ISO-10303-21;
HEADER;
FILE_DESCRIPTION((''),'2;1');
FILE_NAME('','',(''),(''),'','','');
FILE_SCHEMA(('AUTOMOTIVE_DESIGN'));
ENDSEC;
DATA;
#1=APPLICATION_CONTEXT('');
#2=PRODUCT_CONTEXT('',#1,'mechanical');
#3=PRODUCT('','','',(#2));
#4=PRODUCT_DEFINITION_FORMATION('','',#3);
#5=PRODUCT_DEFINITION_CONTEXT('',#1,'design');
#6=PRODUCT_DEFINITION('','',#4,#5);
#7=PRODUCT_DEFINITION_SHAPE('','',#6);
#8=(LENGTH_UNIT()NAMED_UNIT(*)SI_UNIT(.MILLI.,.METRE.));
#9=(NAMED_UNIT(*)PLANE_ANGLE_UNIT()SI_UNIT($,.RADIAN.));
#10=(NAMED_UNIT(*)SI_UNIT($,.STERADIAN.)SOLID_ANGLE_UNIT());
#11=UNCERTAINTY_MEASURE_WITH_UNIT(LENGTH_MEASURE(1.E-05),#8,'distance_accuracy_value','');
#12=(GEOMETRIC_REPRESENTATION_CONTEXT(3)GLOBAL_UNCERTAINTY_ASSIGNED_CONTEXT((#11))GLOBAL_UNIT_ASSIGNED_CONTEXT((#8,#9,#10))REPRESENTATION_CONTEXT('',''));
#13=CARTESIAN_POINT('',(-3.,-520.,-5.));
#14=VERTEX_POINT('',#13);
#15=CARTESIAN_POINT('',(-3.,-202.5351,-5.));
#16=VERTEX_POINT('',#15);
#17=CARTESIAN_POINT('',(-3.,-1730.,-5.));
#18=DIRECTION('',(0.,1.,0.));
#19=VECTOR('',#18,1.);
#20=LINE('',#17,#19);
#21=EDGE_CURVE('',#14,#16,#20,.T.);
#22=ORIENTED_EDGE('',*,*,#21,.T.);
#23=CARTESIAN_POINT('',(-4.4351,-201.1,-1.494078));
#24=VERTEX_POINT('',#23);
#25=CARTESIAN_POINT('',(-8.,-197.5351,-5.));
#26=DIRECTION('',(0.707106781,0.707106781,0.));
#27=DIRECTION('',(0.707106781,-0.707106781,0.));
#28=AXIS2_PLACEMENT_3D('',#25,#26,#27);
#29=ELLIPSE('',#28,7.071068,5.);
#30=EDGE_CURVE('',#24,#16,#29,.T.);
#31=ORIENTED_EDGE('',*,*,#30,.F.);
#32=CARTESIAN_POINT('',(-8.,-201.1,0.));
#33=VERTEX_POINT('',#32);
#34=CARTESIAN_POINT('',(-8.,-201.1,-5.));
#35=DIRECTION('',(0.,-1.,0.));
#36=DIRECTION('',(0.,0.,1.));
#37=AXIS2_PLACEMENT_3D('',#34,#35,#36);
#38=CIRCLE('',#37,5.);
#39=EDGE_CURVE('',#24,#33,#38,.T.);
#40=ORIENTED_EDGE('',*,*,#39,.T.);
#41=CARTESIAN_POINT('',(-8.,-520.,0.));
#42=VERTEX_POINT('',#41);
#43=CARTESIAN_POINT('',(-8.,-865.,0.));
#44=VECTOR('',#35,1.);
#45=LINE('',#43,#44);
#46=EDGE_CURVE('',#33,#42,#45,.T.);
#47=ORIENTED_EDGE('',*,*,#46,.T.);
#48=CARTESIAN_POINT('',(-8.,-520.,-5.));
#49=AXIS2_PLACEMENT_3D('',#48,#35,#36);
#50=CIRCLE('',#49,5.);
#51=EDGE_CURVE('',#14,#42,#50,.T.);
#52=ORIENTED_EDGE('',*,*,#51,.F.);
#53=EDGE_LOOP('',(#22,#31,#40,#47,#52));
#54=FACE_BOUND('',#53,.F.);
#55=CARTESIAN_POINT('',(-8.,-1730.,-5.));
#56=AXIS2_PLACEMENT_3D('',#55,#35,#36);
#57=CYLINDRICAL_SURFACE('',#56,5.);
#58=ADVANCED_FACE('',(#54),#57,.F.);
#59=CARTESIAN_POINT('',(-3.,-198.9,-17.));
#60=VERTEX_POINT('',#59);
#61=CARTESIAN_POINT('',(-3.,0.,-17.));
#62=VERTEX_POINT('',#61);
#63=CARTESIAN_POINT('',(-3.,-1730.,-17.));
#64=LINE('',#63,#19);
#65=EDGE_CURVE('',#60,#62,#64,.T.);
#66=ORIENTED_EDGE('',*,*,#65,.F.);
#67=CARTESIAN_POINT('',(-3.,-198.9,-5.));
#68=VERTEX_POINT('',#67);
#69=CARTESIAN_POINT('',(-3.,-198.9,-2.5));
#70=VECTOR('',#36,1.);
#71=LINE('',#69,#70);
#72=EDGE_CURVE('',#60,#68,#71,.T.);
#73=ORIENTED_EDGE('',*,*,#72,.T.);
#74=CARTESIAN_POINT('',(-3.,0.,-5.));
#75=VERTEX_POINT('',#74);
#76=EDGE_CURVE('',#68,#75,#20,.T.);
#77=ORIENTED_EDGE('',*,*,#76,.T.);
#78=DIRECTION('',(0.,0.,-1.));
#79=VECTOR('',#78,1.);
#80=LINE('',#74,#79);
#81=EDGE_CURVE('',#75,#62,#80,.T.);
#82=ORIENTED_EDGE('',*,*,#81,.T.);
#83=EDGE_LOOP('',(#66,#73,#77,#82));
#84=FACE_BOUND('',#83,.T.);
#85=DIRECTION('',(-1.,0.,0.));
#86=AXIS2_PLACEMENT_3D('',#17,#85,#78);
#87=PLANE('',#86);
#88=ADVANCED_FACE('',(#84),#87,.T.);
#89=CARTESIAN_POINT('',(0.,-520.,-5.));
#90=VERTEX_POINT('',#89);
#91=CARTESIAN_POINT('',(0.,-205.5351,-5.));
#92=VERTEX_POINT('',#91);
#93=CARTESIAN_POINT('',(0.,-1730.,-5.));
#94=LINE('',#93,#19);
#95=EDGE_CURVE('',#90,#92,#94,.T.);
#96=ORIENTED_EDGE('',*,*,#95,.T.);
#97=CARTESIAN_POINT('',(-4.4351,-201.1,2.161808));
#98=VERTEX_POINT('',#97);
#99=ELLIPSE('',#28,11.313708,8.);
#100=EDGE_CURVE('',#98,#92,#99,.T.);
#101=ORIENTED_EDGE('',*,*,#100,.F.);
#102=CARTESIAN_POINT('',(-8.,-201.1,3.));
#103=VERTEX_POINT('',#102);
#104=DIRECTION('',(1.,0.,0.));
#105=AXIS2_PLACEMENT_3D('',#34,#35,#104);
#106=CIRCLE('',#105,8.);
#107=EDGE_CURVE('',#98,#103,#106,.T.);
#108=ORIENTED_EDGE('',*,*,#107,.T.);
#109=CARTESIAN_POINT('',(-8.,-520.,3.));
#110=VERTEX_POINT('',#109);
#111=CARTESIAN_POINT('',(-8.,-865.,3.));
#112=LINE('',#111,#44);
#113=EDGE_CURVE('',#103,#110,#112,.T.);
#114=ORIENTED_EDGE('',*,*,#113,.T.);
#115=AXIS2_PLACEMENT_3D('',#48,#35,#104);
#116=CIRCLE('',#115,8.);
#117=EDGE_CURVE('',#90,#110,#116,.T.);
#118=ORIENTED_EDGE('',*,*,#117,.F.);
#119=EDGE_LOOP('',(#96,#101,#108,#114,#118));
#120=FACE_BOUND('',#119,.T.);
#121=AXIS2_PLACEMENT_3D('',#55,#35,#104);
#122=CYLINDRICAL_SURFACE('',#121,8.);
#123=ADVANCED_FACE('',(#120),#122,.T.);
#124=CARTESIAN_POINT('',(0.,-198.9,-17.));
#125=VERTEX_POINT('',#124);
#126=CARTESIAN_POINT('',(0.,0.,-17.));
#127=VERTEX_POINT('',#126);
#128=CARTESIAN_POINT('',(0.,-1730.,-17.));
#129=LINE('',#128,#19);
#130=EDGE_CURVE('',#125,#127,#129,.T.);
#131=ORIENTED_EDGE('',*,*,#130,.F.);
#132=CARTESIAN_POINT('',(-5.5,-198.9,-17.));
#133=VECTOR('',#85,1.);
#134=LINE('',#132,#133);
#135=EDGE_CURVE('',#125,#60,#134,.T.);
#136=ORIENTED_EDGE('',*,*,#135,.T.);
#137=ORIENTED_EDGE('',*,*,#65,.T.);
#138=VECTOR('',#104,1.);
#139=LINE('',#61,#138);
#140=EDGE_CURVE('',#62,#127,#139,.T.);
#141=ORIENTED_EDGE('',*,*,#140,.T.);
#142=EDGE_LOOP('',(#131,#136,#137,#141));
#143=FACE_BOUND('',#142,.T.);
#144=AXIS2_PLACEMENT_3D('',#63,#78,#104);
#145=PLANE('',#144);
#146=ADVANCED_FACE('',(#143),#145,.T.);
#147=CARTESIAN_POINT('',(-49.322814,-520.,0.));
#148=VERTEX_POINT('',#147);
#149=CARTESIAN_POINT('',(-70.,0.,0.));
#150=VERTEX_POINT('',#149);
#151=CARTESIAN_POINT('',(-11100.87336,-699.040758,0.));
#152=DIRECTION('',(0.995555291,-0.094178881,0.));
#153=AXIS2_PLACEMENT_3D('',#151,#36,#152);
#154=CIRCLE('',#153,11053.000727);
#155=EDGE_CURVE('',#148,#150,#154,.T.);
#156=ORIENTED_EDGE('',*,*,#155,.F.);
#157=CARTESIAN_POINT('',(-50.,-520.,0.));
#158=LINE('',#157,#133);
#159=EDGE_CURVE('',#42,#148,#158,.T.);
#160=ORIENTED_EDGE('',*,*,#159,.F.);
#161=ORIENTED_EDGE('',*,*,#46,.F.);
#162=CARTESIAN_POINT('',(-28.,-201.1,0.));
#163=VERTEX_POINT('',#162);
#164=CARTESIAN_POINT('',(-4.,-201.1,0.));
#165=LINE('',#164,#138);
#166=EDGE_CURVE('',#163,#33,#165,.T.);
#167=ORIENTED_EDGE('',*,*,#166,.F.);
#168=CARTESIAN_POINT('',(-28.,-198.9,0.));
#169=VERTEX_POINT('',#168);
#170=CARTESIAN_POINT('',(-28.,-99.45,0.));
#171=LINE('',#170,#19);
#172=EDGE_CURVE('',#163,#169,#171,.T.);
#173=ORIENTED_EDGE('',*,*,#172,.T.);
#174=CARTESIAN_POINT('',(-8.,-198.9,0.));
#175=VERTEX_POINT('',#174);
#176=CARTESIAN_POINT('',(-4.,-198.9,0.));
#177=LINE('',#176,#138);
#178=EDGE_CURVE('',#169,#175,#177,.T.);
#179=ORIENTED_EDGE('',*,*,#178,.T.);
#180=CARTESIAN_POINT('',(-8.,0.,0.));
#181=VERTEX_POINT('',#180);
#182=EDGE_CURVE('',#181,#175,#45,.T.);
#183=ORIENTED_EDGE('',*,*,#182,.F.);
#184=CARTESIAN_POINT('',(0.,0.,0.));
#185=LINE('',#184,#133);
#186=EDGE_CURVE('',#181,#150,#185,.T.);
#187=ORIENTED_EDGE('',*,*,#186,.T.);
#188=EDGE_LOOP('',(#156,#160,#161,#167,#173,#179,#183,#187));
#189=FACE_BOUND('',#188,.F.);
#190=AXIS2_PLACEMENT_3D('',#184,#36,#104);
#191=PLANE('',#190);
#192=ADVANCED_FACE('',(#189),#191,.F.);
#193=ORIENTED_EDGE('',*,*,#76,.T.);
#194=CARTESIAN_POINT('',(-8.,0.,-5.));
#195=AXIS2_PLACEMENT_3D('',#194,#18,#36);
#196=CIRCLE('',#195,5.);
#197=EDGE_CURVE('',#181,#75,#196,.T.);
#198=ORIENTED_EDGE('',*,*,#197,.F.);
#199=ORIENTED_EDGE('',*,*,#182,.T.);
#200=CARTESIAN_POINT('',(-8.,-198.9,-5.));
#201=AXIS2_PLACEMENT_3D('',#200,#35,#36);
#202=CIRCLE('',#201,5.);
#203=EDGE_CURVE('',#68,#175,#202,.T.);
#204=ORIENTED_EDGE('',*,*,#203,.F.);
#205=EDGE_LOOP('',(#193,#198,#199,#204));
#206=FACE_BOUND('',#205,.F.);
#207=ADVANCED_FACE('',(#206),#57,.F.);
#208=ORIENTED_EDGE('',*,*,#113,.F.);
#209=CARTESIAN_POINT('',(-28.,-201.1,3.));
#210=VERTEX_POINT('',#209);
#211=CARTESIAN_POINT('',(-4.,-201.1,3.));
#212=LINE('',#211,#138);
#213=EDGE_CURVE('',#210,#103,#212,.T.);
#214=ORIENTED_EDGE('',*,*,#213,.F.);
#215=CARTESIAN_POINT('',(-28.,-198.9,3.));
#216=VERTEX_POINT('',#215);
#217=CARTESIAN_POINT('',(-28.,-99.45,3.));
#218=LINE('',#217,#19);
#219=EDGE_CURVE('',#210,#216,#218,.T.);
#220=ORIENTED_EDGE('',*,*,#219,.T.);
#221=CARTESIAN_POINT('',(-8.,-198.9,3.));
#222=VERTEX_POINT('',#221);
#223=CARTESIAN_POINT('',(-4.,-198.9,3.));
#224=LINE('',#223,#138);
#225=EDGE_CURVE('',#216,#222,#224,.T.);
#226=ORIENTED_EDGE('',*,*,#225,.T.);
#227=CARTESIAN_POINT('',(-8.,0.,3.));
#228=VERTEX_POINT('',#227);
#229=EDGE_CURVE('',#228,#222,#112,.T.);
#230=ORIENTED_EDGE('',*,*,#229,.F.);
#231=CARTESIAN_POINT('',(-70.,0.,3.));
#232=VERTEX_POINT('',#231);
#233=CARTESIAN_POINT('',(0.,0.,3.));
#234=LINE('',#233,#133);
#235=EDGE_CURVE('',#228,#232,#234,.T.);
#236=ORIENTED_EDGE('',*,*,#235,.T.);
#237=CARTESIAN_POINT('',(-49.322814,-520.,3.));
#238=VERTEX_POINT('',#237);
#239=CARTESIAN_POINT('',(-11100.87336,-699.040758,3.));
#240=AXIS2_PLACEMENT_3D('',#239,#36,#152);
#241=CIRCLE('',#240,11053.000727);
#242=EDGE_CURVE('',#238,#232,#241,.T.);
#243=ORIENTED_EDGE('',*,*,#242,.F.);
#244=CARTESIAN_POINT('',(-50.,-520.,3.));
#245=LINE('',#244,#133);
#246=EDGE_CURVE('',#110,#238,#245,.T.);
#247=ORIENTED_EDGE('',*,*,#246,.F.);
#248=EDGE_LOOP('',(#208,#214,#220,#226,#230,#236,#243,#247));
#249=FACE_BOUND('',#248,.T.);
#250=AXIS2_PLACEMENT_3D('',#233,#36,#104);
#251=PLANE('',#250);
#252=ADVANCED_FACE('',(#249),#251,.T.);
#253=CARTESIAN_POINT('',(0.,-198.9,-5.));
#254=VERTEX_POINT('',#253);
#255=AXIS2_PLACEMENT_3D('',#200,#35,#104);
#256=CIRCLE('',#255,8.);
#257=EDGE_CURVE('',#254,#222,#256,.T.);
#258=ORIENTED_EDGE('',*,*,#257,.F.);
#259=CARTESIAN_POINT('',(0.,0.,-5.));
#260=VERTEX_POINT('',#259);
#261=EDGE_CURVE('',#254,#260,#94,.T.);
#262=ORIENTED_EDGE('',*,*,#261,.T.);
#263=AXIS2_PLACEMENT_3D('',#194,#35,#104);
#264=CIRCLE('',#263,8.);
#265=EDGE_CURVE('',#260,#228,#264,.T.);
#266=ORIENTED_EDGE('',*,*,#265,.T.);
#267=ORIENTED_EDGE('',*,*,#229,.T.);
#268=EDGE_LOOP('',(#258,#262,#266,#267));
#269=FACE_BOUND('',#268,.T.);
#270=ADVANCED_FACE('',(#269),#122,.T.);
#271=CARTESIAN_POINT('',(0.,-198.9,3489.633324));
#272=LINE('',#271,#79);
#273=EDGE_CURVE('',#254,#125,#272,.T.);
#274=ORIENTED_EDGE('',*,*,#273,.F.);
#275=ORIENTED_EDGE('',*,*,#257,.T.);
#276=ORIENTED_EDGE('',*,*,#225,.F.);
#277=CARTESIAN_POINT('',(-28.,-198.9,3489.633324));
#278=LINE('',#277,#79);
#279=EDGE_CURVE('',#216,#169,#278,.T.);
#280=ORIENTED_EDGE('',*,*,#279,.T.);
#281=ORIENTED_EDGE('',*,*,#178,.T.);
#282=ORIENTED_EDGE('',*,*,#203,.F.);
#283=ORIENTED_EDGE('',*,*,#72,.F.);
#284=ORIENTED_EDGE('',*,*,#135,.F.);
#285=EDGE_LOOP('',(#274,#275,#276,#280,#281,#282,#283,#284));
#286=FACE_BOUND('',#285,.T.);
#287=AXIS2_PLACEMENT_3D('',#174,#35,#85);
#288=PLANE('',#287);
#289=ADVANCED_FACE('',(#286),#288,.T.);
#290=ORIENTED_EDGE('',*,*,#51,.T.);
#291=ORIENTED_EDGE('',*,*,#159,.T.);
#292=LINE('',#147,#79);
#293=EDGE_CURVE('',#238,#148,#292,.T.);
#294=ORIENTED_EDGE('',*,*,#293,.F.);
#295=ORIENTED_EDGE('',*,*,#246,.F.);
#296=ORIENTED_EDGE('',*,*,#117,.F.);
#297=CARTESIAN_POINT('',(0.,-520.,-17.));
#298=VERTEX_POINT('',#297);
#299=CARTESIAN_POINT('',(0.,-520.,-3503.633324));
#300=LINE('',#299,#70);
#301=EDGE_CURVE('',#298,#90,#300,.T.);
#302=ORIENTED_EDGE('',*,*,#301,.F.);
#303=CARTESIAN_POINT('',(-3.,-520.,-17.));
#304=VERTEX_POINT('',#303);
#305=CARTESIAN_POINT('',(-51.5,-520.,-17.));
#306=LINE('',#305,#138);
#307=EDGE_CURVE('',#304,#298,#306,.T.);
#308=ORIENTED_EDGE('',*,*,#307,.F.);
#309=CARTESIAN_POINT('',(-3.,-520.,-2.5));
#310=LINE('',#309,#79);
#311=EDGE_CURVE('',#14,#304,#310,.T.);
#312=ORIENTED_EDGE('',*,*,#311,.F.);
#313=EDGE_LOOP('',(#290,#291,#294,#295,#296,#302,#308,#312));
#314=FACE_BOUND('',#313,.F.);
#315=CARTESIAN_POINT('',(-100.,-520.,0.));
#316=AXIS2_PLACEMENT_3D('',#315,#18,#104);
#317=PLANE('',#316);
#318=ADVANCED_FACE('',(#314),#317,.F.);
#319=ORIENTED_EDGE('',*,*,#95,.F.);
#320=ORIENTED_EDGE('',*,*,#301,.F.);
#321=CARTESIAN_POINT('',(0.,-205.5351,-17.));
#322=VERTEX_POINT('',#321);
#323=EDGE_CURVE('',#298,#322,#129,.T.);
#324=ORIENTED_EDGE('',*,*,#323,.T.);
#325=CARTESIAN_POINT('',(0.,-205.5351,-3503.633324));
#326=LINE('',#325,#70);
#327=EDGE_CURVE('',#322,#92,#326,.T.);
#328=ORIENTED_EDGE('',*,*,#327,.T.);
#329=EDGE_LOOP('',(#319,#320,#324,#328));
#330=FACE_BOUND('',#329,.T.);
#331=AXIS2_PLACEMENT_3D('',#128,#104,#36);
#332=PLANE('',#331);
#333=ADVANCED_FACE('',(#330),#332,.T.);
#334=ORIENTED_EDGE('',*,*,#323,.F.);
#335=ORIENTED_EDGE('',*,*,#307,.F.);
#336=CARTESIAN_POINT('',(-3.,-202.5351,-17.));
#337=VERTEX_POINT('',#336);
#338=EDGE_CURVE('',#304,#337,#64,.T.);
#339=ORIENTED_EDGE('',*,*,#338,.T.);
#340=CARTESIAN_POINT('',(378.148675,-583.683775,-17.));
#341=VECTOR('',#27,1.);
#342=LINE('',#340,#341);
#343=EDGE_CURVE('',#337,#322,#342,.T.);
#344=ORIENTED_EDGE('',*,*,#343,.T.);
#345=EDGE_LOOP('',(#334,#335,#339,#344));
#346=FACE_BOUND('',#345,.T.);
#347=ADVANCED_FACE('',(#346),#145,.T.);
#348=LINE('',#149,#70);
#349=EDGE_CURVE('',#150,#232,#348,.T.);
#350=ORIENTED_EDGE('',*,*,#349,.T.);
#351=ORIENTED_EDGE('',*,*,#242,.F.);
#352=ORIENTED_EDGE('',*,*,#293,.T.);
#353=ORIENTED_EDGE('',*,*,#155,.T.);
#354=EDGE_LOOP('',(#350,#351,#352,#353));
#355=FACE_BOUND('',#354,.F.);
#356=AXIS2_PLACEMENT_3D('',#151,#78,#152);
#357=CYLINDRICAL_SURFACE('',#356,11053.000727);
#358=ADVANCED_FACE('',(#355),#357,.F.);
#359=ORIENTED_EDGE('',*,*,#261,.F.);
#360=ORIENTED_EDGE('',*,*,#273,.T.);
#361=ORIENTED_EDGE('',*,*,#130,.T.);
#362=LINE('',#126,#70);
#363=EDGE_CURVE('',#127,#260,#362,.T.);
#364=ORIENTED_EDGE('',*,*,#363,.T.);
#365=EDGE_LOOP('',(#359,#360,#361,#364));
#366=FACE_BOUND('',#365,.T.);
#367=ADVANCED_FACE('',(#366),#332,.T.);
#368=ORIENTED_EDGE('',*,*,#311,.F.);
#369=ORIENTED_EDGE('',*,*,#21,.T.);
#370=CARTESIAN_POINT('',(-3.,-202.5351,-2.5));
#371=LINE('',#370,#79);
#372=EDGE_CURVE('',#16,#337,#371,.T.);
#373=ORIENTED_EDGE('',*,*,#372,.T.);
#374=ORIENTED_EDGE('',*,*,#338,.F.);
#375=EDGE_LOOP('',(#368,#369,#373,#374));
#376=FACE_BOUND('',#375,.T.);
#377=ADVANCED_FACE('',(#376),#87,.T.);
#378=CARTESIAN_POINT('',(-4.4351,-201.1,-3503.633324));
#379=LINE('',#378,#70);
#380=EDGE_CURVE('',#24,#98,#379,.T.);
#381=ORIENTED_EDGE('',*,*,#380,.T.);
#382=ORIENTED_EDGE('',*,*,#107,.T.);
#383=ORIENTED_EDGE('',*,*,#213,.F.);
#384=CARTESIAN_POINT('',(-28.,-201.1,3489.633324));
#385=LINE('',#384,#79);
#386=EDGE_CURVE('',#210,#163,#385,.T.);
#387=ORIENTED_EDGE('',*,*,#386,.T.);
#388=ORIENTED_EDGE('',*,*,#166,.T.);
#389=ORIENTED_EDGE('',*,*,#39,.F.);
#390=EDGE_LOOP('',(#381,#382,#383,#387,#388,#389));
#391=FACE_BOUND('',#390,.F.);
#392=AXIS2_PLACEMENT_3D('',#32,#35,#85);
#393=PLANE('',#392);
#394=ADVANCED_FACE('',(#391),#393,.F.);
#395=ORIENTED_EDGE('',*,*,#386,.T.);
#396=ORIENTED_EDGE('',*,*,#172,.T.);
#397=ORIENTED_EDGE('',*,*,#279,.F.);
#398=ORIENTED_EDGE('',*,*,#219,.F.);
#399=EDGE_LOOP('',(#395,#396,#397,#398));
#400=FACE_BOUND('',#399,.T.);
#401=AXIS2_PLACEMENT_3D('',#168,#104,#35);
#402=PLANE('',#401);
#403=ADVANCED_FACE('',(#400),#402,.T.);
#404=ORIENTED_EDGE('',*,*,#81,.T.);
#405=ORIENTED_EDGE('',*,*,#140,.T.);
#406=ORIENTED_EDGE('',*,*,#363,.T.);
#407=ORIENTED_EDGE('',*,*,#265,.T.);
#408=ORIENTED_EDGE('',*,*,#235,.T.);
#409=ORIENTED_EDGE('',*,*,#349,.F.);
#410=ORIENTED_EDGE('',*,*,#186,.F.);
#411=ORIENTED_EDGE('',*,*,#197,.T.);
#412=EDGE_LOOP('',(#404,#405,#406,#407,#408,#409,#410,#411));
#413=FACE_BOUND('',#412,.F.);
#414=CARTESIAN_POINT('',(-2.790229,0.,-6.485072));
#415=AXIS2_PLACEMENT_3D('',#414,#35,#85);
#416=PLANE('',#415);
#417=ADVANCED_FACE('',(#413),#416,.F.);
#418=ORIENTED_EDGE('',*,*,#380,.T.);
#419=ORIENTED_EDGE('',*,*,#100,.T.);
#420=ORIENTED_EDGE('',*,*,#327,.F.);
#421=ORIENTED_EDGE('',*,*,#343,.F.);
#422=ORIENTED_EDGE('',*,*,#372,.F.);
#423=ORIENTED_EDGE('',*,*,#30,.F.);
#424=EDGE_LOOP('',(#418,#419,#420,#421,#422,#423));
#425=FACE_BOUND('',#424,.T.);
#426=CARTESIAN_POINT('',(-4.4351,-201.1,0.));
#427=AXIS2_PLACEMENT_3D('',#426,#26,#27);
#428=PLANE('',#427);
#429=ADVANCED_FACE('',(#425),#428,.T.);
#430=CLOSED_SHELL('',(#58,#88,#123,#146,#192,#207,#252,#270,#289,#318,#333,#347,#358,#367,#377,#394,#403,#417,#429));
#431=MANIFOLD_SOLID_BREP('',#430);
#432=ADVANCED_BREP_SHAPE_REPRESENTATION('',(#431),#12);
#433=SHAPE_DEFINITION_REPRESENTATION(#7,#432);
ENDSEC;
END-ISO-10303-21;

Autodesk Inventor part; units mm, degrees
ref_plane "YZ Plane" through (0, 0, 0) normal (1, 0, 0) x (0, 1, 0)
ref_plane "XZ Plane" through (0, 0, 0) normal (0, 1, 0) x (-1, 0, 0)
ref_plane "XY Plane" through (0, 0, 0) normal (0, 0, 1) x (1, 0, 0)
sketch "Sketch1" plane through (0, 0, 0) normal (0, 0, 1) x (1, 0, 0)
  arc A0 (-97, -1740) -> (-70, 0) centre (-11100.8726, -699.0408) ccw
  line L0 (0, 0) -> (-70, 0)
  line L1 (0, -16.732) -> (-68.9524, -16.732) construction
  line L2 (0, -496.732) -> (-49.7243, -496.732) construction
  line L3 (0, -976.732) -> (-51.3615, -976.732) construction
  line L4 (0, -1456.732) -> (-73.8734, -1456.732) construction
  line L5 (-97, -1740) -> (0, -1740)
  line L6 (0, 0) -> (0, -1740)
  line L7 (0, -1730) -> (-10.3553, -1740)
  point P0 (-20, 0)
  dimension "d33" = 50
  dimension "d58" = 480
  dimension "d59" = 480
  dimension "d60" = 480
  dimension "d141" = 1740
  dimension "d148" = 70
  dimension "d149" = 11053
  dimension "d150" = 97
  dimension "d151" = 136
  dimension "d153" = 10
extrude "Plate3" add sketch "Sketch1" along normal blind 3 contours A0 L0 L6 L7 L5
sketch "Sketch3" plane through (-3, 0, 3) normal (1, 0, 0) x (0, 1, 0)
  line L0 (-1730, 0) -> (0, 0)
  line L1 (0, 0) -> (0, 20)
  line L2 (0, 20) -> (-1730, 20)
  line L3 (-1730, 20) -> (-1730, 0)
edge flange "Flange2" height 20 angle 90 thickness 3 bend radius 5 thickness toward (1, 0, 0) relief round relief width 3 relief depth 1.5 edges at (0, -865, 3) wall of the first edge with corners at (-3, -1730, 3) (-3, 0, 3) (-3, 0, -17) (-3, -1730, -17)
bend "Bend2"
corner "Corner2"
sketch "Sketch5" plane through (0, 0, 0) normal (0, 0, 1) x (1, 0, 0)
  line L0 (-8, -1737.7255) -> (-8, 0) projected
  line L1 (-70, 0) -> (-8, 0) projected
  arc A0 (-97, -1740) -> (-70, 0) centre (-11100.8726, -699.0408) ccw projected
  line L2 (0, 0) -> (0, -1730) projected
  line L3 (0, -198.9) -> (-28, -198.9)
  line L4 (0, -201.1) -> (-3, -201.1)
  line L5 (-3, -1730) -> (-3, 0) projected
  line L6 (-28, -198.9) -> (-28, -201.1)
  line L7 (0, -608.9) -> (-48.2402, -608.9) construction
  line L8 (0, -1018.9) -> (-52.5018, -1018.9) construction
  line L9 (0, -1428.9) -> (-71.9962, -1428.9) construction
  line L10 (-10.3553, -1740) -> (-97, -1740) projected
  line L11 (0, -198.9) -> (0, -218.9)
  line L12 (-3, -198.9) -> (-3, -201.1) construction
  line L13 (0, -218.9) -> (-3, -218.9)
  line L14 (-28, -198.9) -> (-59.1939, -198.9) construction
  line L15 (-28, -201.1) -> (-59.0945, -201.1) construction
  line L16 (-3, -201.1) -> (-3, -218.9)
  line L17 (-3, -201.1) -> (-28, -201.1)
  line L18 (-3, -218.9) -> (-8, -218.9)
  line L19 (-8, -1737.7255) -> (-10.3553, -1740) projected
  line L20 (-4.4351, -201.1) -> (0, -205.5351)
  line L21 (-4.4351, -201.1) -> (1.8371, -201.1) construction
  line L22 (-10.3553, -1740) -> (-10.3553, -1770)
  point P0 (0, 0)
  point P1 (845.25, -380.4205)
  point P2 (848, -380.4205)
  point P3 (-28, -200)
  point P4 (850, -410.4205)
  point P5 (-3, -198.9)
  point P6 (-3, -218.9)
  point P7 (-8, -201.1)
  point P8 (0, -205.5351)
  dimension "d69" = 1730
  dimension "d70" = 2.2
  dimension "d76" = 59.1939
  dimension "d80" = 48.2402
  dimension "d102" = 71.9962
  dimension "d104" = 52.5018
  dimension "d106" = 3
  dimension "d107" = 20
  dimension "d108" = 200
  dimension "d112" = 28
  dimension "d142" = 410
  dimension "d143" = 410
  dimension "d144" = 410
  dimension "d154" = 45
  dimension "d155" = 30
  dimension "d156" = 341.1
extrude "Extrusion2" cut sketch "Sketch5" along normal through all both and the other way through all contours L17 L6 L3 L0 | L0 L3 L5 L17 | L17 L5 L20 | L5 L4 L2 L20 | L3 L2 L4 L5
pattern_linear "Rectangular Pattern3" count 4 spacing 410 along (0, -1, 0) of "Extrusion2"
sketch "Sketch7" plane through (0, 0, 0) normal (0, 0, 1) x (1, 0, 0)
  line L0 (0, 0) -> (0, -198.9) projected
  line L1 (0, 0) -> (-100, 0)
  line L2 (-100, 0) -> (-100, -520)
  line L3 (-100, -520) -> (0, -520)
  line L4 (0, -520) -> (0, 0)
  line L5 (-100, -1740) -> (0, -1740)
  line L6 (0, -1740) -> (0, -520)
  line L7 (0, -520) -> (-100, -520)
  line L8 (-100, -520) -> (-100, -1740)
  line L9 (-97, -1740) -> (-10.3553, -1740) projected
  point P0 (-50, -1740)
  dimension "d157" = 100
  dimension "d158" = 520
extrude "Extrusion3" cut sketch "Sketch7" along normal through all both and the other way through all contours L6 L5 L8 L3
equation "\"d33\" = d25"
equation "\"БОРТ_стрингер_3_высота\" = 59"
equation "\"БОРТ_стрингер_4_высота\" = 48"
equation "\"БОРТ_стрингер_5_высота\" = 53"
equation "\"БОРТ_стрингер_6_высота\" = 72"
equation "\"d25\" = 50"
properties part number "MSC 348 RIB BOARD" material "Stainless Steel"
